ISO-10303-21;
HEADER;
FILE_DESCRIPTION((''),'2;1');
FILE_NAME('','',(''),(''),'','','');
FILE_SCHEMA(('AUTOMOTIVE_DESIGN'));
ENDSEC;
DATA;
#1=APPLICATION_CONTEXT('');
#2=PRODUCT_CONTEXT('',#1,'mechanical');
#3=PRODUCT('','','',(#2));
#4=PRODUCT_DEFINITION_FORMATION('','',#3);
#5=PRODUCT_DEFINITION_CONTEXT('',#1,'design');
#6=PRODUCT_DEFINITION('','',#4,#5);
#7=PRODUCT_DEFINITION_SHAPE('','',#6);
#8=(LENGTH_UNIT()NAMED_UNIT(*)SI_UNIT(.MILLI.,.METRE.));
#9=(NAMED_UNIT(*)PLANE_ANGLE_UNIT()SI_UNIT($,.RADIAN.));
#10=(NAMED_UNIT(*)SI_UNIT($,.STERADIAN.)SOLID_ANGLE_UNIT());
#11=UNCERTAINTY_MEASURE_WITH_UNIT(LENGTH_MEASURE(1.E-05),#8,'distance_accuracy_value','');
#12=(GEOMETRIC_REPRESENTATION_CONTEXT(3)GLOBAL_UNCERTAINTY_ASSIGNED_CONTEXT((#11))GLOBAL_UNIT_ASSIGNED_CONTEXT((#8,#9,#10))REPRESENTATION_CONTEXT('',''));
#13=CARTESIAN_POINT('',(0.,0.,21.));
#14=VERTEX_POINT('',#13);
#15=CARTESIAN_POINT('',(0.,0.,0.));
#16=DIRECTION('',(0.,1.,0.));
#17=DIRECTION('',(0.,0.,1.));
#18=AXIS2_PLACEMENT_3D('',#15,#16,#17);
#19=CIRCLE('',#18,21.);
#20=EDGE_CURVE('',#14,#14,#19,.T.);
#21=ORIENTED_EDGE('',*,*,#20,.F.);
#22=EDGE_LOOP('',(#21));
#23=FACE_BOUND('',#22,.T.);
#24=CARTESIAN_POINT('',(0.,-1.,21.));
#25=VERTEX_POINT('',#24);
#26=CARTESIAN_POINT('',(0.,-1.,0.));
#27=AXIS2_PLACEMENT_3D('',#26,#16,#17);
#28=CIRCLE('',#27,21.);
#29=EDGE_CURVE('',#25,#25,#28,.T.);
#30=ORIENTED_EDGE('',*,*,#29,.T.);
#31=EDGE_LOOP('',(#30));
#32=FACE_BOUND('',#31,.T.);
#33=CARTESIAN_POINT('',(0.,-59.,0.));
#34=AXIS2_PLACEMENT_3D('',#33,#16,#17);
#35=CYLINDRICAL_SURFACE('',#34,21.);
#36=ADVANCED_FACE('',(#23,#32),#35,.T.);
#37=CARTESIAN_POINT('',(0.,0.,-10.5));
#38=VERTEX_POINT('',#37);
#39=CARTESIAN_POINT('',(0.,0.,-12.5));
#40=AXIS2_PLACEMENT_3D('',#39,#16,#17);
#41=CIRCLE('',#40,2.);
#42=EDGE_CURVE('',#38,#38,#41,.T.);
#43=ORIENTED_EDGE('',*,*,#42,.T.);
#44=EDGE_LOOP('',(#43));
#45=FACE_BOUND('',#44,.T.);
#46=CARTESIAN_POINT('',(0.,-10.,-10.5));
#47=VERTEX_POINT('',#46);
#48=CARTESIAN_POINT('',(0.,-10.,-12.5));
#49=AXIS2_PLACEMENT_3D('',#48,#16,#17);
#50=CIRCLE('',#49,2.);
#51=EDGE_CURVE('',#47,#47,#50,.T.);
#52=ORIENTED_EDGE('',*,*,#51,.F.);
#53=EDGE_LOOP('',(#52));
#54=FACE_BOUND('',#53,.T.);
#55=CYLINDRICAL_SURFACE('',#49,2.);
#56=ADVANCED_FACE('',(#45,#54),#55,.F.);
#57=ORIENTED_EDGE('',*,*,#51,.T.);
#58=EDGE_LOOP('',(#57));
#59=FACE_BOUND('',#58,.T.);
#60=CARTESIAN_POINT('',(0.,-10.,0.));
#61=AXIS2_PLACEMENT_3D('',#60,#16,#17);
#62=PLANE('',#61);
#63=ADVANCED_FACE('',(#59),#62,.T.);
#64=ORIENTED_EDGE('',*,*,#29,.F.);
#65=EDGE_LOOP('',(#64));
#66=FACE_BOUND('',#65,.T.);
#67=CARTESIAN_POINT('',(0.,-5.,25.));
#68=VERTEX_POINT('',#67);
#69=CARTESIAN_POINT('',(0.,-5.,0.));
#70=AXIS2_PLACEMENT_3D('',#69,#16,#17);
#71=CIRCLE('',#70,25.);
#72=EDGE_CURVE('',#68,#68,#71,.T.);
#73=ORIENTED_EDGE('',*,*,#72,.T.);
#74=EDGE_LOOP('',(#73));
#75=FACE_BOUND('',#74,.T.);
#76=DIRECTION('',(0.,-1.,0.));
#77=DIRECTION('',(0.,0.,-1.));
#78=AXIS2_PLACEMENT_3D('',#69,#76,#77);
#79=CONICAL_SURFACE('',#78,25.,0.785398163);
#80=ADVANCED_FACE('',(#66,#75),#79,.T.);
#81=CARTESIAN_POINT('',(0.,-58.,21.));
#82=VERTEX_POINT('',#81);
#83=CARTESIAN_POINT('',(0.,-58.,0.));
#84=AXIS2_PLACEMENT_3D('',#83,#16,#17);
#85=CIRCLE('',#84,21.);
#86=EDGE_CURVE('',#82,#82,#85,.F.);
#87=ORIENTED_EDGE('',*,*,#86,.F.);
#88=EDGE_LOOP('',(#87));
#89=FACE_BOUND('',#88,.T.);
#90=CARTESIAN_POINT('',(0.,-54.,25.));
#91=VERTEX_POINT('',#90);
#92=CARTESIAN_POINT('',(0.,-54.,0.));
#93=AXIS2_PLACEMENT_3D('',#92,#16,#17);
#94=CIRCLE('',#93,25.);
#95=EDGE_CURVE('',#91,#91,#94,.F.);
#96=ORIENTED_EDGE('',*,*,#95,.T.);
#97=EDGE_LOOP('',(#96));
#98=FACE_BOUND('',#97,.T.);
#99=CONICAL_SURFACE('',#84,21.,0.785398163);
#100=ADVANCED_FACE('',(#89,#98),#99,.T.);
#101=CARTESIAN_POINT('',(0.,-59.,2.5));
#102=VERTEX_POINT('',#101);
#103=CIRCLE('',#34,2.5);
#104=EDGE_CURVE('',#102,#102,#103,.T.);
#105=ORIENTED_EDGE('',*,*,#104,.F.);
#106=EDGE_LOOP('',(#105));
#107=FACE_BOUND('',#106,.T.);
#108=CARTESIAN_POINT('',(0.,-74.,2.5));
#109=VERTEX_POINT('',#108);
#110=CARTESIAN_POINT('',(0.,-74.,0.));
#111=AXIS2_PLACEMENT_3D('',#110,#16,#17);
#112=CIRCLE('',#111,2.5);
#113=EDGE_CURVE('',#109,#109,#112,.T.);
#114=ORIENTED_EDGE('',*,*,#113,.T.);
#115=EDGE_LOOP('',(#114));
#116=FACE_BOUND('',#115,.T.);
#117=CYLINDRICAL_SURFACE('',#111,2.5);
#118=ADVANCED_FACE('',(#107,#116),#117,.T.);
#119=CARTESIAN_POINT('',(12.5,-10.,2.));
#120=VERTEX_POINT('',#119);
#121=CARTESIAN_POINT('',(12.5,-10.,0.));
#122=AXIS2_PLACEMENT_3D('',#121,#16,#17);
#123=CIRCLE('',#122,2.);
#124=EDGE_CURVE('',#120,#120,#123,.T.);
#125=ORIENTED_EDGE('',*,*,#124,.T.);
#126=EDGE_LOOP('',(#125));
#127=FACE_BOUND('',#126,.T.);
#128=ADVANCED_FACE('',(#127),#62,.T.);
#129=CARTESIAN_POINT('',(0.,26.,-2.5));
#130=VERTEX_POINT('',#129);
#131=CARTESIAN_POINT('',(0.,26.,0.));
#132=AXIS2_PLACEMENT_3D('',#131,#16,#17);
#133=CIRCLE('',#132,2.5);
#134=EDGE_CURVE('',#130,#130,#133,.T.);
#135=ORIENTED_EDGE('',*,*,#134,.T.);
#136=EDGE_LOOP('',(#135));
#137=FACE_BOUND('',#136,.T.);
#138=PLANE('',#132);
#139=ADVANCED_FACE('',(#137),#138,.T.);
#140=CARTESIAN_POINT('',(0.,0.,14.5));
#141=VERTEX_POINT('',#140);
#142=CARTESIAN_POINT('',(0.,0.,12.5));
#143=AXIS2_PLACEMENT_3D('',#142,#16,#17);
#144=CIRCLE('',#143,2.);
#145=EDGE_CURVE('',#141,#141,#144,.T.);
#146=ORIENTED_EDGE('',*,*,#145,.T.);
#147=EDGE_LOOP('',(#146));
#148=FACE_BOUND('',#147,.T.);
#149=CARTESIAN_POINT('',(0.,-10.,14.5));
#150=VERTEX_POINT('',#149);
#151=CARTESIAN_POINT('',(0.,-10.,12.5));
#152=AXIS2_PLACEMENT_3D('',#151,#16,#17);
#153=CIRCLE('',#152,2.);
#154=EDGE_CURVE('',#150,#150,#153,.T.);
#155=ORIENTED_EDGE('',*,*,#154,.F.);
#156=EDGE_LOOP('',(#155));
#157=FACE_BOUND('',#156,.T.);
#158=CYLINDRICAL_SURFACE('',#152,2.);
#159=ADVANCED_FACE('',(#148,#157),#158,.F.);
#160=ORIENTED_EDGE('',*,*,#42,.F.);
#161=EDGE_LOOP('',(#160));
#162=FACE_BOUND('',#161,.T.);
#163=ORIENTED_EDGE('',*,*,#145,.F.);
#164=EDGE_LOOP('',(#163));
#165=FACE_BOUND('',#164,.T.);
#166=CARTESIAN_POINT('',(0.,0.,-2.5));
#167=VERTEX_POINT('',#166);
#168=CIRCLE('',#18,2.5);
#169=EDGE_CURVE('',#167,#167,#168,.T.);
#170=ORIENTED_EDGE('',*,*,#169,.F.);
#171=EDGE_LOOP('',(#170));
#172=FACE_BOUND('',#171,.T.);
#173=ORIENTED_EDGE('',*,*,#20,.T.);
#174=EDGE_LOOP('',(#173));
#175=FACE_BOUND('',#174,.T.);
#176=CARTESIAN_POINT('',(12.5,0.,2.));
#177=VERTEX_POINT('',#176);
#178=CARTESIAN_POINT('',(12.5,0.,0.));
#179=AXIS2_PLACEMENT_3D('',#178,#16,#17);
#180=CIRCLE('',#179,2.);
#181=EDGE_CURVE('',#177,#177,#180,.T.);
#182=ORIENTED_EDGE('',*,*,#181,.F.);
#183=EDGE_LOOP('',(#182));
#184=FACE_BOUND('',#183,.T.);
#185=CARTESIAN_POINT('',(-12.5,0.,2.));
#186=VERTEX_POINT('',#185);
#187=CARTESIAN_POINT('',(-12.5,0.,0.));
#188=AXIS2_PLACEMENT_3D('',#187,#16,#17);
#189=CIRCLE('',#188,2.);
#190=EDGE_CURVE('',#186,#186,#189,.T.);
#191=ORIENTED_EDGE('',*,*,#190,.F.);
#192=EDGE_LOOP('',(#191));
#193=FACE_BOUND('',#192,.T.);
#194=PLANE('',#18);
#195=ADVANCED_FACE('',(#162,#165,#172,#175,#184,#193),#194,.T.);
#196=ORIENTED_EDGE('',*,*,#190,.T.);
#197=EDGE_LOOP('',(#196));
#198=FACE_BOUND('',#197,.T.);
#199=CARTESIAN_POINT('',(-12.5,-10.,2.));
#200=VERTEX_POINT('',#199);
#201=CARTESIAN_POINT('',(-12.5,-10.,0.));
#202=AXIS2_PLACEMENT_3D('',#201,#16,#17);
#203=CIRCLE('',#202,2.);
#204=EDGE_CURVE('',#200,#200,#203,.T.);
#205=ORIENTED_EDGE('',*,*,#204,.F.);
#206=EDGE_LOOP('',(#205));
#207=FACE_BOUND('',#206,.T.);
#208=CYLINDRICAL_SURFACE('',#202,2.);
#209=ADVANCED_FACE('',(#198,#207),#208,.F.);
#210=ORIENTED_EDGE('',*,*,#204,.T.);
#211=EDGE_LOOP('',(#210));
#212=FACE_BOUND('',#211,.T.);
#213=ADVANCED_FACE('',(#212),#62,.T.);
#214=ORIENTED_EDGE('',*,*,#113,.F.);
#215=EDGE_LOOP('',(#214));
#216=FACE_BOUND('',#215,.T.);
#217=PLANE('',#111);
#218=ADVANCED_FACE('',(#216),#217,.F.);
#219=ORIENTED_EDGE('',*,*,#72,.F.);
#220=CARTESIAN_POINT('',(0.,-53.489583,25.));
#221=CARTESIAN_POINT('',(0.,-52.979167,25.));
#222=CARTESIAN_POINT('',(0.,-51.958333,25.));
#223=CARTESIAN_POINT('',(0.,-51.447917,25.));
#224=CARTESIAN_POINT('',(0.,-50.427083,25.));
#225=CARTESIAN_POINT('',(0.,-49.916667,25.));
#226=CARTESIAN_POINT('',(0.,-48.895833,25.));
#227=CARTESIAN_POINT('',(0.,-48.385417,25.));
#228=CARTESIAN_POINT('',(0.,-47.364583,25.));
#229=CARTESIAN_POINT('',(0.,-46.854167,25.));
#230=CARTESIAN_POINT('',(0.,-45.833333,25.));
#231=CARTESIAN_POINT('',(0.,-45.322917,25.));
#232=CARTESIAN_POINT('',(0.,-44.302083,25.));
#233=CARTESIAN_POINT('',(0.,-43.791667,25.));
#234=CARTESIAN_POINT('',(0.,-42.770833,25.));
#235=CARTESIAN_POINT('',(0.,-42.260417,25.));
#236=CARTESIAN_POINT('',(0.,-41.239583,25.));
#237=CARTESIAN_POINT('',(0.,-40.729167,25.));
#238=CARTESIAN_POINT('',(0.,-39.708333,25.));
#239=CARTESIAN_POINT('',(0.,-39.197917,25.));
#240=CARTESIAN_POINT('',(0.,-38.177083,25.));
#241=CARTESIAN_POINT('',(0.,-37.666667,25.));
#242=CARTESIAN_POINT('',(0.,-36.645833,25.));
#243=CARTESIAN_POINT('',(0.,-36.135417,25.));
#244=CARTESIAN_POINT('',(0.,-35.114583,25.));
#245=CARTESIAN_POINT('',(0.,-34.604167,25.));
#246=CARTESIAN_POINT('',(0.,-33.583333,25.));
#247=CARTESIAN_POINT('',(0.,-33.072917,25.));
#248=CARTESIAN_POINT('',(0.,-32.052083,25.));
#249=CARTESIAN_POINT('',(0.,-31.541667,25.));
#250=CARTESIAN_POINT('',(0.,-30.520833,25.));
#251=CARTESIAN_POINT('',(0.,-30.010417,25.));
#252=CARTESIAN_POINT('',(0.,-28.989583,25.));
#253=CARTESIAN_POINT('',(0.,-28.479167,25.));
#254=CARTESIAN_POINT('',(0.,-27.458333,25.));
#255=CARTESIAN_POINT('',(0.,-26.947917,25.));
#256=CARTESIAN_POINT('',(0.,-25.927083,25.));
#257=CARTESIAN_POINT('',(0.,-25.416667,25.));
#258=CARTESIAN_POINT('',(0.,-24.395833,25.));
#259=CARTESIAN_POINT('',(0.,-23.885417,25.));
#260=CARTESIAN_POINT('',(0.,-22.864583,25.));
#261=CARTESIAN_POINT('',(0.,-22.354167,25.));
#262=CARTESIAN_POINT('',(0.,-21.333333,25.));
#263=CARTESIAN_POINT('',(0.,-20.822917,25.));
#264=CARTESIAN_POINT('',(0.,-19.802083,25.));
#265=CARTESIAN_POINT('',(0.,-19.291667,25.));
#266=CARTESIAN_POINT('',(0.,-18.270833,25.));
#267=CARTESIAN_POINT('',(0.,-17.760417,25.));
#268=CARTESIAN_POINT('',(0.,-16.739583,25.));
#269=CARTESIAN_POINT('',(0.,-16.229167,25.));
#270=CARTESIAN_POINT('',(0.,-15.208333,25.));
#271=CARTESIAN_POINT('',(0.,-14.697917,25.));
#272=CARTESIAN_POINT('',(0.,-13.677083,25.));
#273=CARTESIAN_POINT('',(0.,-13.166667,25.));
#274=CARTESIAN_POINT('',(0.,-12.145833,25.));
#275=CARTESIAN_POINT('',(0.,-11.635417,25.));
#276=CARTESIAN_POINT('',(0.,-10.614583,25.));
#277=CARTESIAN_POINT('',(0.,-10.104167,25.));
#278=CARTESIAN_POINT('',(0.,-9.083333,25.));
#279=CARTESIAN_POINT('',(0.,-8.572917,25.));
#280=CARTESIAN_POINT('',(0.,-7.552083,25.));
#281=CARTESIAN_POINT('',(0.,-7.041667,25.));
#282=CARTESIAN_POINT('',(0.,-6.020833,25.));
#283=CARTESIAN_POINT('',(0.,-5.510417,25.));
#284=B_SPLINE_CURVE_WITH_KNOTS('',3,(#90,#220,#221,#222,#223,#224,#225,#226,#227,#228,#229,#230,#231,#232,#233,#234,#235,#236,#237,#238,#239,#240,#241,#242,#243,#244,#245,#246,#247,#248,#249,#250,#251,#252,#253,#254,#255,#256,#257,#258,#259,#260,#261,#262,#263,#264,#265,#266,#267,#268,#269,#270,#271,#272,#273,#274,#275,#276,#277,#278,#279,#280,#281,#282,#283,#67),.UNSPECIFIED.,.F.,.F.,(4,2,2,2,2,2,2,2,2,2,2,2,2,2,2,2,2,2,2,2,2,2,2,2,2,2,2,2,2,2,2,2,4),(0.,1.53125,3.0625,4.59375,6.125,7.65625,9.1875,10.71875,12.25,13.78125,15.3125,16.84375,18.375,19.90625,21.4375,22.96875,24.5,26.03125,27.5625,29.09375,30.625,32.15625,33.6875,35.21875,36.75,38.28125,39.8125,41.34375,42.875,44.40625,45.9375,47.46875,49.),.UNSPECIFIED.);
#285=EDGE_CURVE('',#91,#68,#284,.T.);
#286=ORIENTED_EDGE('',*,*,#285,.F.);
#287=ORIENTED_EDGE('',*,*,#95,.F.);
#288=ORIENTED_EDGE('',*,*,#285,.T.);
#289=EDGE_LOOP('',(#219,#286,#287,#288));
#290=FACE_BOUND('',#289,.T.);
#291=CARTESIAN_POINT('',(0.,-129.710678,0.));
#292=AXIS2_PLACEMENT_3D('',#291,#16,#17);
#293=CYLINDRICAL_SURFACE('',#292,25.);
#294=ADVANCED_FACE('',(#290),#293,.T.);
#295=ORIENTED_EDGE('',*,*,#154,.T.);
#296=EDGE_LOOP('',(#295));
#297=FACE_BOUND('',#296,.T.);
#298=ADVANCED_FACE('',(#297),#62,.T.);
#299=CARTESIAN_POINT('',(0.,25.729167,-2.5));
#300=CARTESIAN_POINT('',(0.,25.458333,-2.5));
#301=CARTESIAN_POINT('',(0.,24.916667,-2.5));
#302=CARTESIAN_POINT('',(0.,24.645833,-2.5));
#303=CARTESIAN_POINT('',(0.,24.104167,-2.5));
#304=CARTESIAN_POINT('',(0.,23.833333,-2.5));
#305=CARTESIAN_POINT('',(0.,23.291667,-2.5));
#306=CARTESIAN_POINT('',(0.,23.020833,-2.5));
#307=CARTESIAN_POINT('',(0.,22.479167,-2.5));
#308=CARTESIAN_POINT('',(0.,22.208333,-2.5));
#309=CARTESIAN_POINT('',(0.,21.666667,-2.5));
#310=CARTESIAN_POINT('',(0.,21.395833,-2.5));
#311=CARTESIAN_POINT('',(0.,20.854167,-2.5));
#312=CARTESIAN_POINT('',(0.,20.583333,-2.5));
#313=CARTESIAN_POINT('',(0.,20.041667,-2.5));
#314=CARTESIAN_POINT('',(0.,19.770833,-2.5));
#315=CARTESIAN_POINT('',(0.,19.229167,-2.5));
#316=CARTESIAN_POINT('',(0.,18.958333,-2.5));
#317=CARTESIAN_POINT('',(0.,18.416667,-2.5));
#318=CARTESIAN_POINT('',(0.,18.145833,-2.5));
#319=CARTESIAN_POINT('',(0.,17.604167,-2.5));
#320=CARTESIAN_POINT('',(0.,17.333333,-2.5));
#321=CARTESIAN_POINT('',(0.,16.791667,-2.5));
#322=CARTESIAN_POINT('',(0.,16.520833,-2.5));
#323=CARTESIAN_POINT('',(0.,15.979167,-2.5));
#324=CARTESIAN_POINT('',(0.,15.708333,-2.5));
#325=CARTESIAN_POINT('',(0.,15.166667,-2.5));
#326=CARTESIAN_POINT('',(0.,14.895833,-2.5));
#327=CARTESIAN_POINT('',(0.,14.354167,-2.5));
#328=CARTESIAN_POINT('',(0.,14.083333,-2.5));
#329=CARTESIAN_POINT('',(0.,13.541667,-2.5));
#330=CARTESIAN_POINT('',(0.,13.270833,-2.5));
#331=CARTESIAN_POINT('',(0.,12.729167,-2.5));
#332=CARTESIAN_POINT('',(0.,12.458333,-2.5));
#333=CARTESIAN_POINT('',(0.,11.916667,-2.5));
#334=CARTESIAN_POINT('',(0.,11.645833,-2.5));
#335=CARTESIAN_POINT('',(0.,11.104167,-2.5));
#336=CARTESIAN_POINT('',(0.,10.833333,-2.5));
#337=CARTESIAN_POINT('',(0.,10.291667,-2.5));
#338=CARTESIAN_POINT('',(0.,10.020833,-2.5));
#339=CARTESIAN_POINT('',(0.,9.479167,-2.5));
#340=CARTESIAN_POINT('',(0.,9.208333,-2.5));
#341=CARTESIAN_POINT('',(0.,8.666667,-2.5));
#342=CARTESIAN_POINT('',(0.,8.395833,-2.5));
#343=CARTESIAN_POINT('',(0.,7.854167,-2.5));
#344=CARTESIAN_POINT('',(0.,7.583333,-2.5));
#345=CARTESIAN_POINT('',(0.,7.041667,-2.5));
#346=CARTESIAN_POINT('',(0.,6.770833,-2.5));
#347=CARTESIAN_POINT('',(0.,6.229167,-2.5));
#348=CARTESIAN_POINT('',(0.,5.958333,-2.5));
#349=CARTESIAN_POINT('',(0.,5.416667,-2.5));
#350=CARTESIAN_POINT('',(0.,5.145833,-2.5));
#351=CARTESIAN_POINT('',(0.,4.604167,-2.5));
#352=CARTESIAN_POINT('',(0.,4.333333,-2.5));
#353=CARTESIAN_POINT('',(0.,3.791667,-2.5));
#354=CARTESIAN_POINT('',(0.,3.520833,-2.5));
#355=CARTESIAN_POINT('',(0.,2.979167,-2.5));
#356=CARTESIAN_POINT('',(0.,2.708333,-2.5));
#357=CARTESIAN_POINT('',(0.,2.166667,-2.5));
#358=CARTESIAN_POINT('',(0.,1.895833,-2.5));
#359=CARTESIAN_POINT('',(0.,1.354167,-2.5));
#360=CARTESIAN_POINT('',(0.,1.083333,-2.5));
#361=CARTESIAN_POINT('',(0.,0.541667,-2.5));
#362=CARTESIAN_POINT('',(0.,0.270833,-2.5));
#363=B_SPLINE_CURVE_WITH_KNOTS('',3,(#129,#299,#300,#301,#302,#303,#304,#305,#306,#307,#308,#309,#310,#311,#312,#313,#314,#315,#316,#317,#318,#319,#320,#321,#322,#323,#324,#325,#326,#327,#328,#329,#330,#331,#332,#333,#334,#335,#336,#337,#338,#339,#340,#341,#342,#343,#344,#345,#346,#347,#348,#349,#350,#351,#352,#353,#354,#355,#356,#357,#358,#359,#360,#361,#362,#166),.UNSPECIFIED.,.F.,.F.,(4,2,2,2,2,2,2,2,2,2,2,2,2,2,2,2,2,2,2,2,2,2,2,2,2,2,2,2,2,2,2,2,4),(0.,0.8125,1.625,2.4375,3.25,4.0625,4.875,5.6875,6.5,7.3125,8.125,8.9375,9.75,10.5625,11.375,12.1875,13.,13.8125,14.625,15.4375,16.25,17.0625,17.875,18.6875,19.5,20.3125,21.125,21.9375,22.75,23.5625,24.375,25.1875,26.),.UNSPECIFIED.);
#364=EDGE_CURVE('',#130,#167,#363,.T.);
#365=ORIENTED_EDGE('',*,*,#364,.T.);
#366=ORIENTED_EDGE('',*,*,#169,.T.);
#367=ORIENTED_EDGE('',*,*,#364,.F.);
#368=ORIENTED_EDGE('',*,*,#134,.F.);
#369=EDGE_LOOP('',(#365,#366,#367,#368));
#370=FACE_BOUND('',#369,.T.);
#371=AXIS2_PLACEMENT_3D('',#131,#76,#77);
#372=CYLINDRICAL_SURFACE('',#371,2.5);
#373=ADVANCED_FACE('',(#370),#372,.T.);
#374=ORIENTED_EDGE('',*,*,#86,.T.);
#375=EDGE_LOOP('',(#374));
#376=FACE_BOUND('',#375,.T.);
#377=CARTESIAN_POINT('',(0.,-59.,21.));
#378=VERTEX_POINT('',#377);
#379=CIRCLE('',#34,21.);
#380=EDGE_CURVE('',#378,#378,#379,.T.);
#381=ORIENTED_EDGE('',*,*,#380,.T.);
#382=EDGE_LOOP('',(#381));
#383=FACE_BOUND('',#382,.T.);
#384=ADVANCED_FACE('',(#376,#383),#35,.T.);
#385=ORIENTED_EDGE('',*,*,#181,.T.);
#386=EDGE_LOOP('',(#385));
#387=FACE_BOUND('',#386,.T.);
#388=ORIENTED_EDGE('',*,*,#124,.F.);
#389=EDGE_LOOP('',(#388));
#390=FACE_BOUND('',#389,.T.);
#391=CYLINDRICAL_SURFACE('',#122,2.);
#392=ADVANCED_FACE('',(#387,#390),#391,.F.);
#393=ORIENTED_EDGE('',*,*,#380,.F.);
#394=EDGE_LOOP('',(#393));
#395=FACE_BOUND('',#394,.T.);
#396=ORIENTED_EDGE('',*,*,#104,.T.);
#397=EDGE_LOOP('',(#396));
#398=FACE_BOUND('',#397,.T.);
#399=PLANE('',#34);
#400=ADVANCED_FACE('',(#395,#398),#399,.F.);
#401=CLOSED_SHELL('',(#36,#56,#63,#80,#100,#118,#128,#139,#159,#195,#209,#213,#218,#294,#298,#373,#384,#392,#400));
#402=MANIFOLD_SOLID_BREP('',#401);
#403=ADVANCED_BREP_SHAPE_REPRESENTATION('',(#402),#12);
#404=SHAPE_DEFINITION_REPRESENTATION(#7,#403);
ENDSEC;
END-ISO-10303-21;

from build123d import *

# Parameters (mm, degrees)
SKETCH1_R           = 21
BOSS_EXTRUDE1_DEPTH = 59
SKETCH1_3_R         = 2.5
BOSS_EXTRUDE2_DEPTH = 26
SKETCH1_4_R         = 2
CUT_EXTRUDE1_DEPTH  = 10
BOSS_EXTRUDE3_START = -5
SKETCH1_5_R         = 25
SKETCH1_5_R_2       = 21
BOSS_EXTRUDE3_DEPTH = 49
CHAMFER1_SIZE       = 4
BOSS_EXTRUDE4_START = -74
SKETCH1_6_R         = 2.5
BOSS_EXTRUDE4_DEPTH = 15


with BuildPart() as part:
    # Sketch1 → Boss-Extrude1 (new body)
    with BuildSketch(Plane(origin=(0, 0, 0), x_dir=(1, 0, 0), z_dir=(0, 1, 0))):
        with Locations(Location((0, 0, 0), (0, 0, 270))):
            Circle(SKETCH1_R)
    extrude(amount=-BOSS_EXTRUDE1_DEPTH)

    # Sketch1<3> → Boss-Extrude2 (add)
    with BuildSketch(Plane(origin=(0, 0, 0), x_dir=(1, 0, 0), z_dir=(0, 1, 0))):
        with Locations(Location((0, 0, 0), (0, 0, 90))):
            Circle(SKETCH1_3_R)
    extrude(amount=BOSS_EXTRUDE2_DEPTH)

    # Sketch1<4> → Cut-Extrude1 (cut)
    with BuildSketch(Plane(origin=(0, 0, 0), x_dir=(1, 0, 0), z_dir=(0, 1, 0))):
        with Locations(Location((-12.5, 0, 0), (0, 0, 270))):
            Circle(SKETCH1_4_R)
        with Locations(Location((0, 12.5, 0), (0, 0, 270))):
            Circle(SKETCH1_4_R)
        with Locations(Location((12.5, 0, 0), (0, 0, 270))):
            Circle(SKETCH1_4_R)
        with Locations(Location((0, -12.5, 0), (0, 0, 270))):
            Circle(SKETCH1_4_R)
    extrude(amount=-CUT_EXTRUDE1_DEPTH, mode=Mode.SUBTRACT)

    # Sketch1<5> → Boss-Extrude3 (add)
    with BuildSketch(Plane(origin=(0, 0, 0), x_dir=(1, 0, 0), z_dir=(0, 1, 0)).offset(BOSS_EXTRUDE3_START)):
        with Locations(Location((0, 0, 0), (0, 0, 270))):
            Circle(SKETCH1_5_R)
        with Locations(Location((0, 0, 0), (0, 0, 270))):
            Circle(SKETCH1_5_R_2, mode=Mode.SUBTRACT)
    extrude(amount=-BOSS_EXTRUDE3_DEPTH)

    # Chamfer1
    chamfer1_edges = [part.edges().sort_by_distance(p)[0] for p in [
        (0, -5, -21),
        (0, -54, -21),
    ]]
    chamfer(chamfer1_edges, length=CHAMFER1_SIZE - 0.0001)  # a hair under: the kernel refuses the full size

    # Sketch1<6> → Boss-Extrude4 (add)
    with BuildSketch(Plane(origin=(0, 0, 0), x_dir=(1, 0, 0), z_dir=(0, 1, 0)).offset(BOSS_EXTRUDE4_START)):
        with Locations(Location((0, 0, 0), (0, 0, 90))):
            Circle(SKETCH1_6_R)
    extrude(amount=BOSS_EXTRUDE4_DEPTH)


solid = part.part
